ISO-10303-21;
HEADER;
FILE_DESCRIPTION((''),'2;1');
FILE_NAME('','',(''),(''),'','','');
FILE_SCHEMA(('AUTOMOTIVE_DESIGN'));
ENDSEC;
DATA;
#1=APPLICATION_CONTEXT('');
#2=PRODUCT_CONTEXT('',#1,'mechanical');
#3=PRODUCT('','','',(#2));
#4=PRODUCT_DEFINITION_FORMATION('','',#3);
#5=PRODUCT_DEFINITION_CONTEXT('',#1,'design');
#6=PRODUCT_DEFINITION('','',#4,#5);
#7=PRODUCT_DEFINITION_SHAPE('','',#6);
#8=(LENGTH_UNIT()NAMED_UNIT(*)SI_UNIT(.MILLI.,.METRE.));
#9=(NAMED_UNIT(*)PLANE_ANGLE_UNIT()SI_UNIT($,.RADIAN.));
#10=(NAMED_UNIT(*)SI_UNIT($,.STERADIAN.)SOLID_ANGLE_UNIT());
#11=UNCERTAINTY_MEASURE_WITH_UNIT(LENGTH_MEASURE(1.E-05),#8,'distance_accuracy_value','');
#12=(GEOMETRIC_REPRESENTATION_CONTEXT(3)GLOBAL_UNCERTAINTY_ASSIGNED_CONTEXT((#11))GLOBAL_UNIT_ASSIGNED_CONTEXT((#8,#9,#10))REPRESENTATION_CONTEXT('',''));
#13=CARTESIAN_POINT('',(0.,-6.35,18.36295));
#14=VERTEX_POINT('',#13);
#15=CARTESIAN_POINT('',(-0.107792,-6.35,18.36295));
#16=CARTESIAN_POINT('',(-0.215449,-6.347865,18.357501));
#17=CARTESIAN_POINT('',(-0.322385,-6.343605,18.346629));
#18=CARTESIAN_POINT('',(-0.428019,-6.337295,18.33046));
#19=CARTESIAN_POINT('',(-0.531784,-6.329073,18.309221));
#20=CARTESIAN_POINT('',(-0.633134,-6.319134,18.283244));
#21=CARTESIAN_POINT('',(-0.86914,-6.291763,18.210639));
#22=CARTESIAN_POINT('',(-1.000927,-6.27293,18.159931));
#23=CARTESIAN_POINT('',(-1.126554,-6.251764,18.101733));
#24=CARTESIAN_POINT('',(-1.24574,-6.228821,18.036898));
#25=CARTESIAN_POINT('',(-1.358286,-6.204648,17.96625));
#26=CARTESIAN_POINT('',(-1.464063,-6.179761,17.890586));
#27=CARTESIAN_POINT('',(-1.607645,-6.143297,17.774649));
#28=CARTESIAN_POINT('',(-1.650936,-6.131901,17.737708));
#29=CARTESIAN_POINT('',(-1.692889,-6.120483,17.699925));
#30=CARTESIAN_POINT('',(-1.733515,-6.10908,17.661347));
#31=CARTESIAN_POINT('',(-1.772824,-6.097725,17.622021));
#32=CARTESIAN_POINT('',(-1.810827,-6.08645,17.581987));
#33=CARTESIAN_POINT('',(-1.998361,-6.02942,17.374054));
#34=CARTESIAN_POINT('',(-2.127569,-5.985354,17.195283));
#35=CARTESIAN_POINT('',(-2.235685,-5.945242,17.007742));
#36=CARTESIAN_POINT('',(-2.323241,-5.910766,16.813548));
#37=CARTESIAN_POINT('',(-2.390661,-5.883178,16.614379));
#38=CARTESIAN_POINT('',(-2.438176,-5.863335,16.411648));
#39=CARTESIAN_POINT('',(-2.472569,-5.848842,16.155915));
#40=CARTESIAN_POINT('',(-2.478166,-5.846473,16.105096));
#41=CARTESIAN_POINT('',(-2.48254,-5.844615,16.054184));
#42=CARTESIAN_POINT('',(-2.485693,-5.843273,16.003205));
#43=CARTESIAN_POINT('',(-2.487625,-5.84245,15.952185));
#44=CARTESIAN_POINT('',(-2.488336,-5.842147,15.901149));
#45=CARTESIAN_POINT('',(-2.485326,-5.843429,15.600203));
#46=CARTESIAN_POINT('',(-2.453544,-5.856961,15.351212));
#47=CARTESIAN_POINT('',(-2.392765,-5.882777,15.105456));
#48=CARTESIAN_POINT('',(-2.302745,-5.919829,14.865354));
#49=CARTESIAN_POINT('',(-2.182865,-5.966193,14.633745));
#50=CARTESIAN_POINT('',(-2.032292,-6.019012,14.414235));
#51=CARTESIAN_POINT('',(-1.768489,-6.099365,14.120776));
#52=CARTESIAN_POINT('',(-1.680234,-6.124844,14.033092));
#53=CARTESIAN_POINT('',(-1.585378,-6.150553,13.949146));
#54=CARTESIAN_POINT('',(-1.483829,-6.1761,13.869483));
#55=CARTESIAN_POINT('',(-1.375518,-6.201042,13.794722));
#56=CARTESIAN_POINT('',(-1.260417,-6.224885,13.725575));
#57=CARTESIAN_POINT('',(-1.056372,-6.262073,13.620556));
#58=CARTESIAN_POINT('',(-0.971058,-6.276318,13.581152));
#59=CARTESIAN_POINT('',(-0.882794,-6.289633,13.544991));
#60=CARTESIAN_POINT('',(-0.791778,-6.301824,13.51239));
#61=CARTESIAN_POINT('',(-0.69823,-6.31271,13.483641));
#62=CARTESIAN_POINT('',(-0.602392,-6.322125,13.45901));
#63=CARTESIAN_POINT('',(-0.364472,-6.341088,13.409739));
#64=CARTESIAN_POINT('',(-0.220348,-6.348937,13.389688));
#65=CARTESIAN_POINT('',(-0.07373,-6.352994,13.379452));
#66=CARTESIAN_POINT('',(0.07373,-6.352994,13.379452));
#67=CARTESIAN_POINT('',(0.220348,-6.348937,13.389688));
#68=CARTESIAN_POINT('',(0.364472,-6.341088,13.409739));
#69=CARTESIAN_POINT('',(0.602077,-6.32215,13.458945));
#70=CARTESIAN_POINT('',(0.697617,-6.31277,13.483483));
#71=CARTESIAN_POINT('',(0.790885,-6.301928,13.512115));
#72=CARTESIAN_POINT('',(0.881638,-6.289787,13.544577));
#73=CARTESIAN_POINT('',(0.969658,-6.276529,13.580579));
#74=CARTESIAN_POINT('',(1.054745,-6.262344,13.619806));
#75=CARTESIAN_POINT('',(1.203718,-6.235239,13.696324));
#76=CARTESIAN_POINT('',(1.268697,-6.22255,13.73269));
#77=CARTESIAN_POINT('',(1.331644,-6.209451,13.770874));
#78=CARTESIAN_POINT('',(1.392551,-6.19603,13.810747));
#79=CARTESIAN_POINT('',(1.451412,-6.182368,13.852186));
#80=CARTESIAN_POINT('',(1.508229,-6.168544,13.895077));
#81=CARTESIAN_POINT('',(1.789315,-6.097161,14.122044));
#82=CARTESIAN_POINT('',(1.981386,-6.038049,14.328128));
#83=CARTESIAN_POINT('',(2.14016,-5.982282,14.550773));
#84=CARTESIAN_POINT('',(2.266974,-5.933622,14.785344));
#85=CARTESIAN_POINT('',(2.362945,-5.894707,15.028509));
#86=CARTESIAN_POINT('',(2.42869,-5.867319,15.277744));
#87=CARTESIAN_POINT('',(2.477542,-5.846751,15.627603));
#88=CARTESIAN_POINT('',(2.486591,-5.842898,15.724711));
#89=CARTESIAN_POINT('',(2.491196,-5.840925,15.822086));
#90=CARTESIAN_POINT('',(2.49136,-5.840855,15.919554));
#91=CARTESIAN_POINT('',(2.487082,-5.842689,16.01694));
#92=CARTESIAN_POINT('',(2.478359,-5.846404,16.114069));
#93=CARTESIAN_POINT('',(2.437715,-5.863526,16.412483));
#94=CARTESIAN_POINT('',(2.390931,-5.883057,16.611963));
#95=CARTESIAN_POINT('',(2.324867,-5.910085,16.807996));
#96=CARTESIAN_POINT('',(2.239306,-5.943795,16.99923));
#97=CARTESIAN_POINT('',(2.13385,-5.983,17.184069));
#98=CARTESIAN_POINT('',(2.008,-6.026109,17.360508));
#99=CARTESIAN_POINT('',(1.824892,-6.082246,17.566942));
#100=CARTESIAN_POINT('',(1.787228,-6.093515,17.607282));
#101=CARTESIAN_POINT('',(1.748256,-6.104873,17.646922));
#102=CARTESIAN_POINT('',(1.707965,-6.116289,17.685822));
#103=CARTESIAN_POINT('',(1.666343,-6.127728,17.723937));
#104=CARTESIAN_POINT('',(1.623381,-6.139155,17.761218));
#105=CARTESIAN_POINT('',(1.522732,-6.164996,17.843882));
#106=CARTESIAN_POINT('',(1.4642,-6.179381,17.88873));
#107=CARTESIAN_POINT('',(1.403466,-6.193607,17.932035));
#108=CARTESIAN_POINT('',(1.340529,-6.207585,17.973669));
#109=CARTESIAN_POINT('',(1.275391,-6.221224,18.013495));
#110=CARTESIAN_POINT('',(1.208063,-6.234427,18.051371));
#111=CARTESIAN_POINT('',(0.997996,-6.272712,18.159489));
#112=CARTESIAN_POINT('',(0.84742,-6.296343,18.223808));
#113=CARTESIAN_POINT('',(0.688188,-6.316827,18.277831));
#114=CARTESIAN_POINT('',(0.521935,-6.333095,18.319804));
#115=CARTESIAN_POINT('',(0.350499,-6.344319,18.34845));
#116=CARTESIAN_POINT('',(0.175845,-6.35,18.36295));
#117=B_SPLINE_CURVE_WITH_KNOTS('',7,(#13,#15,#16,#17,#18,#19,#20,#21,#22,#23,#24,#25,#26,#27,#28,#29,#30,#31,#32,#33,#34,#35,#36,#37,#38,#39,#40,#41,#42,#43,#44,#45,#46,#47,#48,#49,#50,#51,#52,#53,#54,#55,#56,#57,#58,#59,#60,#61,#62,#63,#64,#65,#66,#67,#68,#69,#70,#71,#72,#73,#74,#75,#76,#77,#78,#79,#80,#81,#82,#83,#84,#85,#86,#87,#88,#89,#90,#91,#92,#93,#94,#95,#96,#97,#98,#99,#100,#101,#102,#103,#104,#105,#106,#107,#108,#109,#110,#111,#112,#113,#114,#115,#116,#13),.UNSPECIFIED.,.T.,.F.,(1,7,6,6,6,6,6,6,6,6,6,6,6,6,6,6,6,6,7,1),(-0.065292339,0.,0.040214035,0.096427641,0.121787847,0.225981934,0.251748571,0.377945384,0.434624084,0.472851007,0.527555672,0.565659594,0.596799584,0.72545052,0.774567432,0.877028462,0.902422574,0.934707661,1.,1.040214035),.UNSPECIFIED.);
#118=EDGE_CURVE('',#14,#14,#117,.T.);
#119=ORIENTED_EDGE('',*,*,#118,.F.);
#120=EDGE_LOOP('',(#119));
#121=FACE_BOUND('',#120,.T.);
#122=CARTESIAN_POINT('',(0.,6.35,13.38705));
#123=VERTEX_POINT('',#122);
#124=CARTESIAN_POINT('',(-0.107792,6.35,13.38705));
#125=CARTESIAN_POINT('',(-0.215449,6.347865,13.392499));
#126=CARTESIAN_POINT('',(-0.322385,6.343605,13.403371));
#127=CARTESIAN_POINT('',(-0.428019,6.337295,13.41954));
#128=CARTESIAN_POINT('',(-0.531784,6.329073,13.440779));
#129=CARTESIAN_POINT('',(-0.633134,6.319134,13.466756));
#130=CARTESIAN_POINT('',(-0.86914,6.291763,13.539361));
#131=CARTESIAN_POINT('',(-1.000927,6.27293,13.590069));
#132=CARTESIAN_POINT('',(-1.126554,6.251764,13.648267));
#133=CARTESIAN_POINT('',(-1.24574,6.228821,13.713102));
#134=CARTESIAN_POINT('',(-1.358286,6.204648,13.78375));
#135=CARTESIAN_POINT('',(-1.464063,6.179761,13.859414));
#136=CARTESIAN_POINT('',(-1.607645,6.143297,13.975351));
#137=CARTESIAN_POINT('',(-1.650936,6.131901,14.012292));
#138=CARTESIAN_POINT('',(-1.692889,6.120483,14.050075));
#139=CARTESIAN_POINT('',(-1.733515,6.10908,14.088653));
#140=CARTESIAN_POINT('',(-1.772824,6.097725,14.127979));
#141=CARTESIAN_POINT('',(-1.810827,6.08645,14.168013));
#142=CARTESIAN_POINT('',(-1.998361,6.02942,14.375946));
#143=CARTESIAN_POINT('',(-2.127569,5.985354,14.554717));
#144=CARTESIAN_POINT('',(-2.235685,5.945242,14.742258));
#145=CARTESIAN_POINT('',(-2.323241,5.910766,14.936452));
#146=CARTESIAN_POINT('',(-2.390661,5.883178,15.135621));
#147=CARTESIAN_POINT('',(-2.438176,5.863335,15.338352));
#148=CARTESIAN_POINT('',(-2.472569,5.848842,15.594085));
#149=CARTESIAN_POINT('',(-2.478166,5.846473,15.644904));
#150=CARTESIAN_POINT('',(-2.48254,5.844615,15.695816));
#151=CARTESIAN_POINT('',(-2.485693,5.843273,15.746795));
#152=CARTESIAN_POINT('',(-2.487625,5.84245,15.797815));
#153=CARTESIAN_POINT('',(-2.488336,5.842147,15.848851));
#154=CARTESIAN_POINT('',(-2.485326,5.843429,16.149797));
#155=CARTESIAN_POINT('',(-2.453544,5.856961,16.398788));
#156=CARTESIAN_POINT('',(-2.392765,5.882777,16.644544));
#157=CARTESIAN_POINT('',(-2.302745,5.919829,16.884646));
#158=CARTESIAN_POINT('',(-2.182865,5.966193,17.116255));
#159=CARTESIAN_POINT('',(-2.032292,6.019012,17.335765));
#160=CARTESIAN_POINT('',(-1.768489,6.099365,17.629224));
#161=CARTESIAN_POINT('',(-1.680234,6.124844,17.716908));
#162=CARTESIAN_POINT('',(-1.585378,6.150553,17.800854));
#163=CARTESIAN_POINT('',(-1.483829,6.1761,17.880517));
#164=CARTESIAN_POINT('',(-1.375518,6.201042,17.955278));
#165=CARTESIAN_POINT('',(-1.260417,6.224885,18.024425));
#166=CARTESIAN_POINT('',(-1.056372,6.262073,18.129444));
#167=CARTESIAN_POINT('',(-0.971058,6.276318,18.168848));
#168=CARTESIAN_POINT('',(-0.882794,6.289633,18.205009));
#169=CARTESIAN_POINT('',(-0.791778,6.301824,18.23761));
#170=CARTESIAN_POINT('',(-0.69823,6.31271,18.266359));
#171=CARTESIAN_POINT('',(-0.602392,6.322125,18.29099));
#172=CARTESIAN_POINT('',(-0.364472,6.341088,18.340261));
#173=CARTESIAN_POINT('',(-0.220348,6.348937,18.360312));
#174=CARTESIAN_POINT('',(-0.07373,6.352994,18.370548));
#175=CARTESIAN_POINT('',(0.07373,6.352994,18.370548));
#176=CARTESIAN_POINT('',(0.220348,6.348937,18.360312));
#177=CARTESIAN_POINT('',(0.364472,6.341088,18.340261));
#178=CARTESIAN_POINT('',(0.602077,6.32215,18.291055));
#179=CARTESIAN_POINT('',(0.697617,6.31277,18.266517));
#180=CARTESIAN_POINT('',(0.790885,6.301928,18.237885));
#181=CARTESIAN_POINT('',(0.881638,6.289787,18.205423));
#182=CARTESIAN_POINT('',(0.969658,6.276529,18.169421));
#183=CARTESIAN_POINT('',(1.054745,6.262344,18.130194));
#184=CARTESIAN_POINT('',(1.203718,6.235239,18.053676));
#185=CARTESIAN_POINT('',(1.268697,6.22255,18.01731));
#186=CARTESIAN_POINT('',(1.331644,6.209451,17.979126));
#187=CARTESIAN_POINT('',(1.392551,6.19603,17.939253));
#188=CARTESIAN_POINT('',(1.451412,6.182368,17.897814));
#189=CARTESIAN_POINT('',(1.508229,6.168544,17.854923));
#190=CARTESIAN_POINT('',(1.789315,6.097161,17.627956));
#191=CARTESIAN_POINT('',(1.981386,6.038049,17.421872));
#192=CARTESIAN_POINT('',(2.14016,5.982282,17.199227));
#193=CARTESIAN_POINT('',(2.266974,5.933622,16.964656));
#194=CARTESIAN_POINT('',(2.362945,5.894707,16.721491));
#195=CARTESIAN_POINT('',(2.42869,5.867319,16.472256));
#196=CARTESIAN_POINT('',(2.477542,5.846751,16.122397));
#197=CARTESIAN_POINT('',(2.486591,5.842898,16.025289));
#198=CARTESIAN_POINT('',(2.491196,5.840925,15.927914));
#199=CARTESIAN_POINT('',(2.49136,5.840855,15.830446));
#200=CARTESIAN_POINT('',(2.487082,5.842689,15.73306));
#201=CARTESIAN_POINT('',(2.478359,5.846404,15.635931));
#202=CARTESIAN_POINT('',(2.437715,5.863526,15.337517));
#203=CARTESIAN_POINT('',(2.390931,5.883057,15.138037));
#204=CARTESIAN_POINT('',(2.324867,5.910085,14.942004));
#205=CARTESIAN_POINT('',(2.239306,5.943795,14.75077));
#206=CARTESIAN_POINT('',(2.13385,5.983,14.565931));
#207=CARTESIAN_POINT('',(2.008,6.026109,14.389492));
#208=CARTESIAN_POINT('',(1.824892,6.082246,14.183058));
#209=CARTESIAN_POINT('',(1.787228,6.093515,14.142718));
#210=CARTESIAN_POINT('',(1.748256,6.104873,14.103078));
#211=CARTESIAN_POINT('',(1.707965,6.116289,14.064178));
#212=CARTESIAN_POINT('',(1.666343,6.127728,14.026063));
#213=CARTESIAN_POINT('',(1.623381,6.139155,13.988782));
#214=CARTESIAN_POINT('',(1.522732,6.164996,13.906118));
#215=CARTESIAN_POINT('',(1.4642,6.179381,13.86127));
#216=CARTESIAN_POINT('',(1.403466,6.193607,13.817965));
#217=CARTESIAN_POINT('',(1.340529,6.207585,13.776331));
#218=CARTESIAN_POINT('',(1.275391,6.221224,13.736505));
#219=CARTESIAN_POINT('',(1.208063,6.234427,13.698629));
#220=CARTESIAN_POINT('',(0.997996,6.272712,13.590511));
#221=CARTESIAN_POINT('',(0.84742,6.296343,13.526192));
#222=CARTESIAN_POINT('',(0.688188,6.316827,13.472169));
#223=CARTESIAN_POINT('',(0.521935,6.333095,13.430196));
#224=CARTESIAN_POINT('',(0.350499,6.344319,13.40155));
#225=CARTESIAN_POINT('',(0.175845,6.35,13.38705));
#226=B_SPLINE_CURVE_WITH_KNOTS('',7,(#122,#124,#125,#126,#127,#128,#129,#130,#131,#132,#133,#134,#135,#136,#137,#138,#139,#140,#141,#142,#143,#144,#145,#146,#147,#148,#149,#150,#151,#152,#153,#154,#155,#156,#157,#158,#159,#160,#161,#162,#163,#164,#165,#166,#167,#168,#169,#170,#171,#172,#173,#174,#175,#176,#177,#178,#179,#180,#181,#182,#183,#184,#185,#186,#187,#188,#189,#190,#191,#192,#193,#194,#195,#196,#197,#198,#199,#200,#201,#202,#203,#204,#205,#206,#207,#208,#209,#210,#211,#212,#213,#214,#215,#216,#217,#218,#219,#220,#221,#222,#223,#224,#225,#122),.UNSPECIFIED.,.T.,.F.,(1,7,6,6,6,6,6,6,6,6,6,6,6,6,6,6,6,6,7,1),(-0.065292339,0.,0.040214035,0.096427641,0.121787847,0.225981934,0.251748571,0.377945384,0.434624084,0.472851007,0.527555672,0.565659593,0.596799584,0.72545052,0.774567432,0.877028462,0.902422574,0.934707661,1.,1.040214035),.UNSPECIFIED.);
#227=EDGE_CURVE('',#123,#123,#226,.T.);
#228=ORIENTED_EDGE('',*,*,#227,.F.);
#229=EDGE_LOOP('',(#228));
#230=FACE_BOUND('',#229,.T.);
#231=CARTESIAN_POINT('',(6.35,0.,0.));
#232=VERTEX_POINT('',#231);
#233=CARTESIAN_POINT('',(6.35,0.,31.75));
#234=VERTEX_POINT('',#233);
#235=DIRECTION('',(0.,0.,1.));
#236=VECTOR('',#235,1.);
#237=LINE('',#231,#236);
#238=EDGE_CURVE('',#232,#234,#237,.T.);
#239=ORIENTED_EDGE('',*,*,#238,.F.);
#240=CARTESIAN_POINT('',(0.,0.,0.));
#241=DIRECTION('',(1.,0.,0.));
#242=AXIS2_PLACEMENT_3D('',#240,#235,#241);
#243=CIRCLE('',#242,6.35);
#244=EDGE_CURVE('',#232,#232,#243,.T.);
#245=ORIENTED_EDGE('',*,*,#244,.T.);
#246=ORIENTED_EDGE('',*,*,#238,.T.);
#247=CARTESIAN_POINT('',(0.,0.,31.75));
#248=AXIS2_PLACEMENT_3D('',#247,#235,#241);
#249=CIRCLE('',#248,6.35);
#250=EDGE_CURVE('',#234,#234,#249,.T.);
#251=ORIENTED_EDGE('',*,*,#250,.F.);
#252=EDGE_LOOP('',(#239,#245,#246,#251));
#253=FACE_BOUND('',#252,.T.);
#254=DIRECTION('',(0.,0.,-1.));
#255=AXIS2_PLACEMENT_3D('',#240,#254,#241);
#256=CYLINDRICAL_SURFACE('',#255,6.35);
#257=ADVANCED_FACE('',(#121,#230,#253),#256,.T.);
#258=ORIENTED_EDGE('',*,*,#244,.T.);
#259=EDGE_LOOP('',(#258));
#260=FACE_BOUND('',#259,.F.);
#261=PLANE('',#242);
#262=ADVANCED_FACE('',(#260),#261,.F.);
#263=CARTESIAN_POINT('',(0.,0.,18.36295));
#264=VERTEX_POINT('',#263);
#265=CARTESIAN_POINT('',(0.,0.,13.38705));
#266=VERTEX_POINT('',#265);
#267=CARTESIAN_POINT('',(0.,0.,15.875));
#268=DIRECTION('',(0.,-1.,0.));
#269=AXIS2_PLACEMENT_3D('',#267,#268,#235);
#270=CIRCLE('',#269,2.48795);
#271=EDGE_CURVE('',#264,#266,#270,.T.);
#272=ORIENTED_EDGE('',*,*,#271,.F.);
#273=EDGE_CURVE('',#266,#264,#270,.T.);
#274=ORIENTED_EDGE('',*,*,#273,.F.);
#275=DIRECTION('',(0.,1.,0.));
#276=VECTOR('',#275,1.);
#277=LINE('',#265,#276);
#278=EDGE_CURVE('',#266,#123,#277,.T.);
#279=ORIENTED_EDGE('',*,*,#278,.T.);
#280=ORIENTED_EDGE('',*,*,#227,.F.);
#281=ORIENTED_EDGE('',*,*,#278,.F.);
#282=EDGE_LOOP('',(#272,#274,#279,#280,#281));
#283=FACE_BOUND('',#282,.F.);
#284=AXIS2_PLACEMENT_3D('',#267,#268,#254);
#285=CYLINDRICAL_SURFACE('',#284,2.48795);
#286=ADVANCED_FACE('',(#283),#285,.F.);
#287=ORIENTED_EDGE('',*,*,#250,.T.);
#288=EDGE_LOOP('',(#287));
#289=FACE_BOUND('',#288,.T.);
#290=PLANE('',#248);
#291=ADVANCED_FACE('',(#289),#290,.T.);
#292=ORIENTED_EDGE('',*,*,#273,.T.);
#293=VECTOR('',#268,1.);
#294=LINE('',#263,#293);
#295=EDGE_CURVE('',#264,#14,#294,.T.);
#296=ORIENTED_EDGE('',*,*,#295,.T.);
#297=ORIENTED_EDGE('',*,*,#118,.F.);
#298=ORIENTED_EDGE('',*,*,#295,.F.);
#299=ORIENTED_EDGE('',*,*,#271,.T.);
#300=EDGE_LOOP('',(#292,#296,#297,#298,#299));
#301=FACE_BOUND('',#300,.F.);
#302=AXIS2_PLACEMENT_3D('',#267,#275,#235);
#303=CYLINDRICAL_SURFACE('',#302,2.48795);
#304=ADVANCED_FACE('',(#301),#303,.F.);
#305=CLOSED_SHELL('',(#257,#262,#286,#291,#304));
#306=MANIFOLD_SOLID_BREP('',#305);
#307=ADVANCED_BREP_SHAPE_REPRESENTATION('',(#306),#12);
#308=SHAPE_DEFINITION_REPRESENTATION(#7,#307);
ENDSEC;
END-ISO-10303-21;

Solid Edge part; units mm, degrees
sketch "Sketch1" plane through (0, 0, 0) normal (0, 0, 1) x (1, 0, 0)
  circle A0 centre (0, 0) radius 6.35
extrude "Protrusion1" add sketch "Sketch1" along normal blind 31.75
hole "ScrewHole" at (0, 0, 15.875) direction (0, -1, 0) diameter 4.9759 end through all both ways yes
properties material "Brass, yellow brass"
